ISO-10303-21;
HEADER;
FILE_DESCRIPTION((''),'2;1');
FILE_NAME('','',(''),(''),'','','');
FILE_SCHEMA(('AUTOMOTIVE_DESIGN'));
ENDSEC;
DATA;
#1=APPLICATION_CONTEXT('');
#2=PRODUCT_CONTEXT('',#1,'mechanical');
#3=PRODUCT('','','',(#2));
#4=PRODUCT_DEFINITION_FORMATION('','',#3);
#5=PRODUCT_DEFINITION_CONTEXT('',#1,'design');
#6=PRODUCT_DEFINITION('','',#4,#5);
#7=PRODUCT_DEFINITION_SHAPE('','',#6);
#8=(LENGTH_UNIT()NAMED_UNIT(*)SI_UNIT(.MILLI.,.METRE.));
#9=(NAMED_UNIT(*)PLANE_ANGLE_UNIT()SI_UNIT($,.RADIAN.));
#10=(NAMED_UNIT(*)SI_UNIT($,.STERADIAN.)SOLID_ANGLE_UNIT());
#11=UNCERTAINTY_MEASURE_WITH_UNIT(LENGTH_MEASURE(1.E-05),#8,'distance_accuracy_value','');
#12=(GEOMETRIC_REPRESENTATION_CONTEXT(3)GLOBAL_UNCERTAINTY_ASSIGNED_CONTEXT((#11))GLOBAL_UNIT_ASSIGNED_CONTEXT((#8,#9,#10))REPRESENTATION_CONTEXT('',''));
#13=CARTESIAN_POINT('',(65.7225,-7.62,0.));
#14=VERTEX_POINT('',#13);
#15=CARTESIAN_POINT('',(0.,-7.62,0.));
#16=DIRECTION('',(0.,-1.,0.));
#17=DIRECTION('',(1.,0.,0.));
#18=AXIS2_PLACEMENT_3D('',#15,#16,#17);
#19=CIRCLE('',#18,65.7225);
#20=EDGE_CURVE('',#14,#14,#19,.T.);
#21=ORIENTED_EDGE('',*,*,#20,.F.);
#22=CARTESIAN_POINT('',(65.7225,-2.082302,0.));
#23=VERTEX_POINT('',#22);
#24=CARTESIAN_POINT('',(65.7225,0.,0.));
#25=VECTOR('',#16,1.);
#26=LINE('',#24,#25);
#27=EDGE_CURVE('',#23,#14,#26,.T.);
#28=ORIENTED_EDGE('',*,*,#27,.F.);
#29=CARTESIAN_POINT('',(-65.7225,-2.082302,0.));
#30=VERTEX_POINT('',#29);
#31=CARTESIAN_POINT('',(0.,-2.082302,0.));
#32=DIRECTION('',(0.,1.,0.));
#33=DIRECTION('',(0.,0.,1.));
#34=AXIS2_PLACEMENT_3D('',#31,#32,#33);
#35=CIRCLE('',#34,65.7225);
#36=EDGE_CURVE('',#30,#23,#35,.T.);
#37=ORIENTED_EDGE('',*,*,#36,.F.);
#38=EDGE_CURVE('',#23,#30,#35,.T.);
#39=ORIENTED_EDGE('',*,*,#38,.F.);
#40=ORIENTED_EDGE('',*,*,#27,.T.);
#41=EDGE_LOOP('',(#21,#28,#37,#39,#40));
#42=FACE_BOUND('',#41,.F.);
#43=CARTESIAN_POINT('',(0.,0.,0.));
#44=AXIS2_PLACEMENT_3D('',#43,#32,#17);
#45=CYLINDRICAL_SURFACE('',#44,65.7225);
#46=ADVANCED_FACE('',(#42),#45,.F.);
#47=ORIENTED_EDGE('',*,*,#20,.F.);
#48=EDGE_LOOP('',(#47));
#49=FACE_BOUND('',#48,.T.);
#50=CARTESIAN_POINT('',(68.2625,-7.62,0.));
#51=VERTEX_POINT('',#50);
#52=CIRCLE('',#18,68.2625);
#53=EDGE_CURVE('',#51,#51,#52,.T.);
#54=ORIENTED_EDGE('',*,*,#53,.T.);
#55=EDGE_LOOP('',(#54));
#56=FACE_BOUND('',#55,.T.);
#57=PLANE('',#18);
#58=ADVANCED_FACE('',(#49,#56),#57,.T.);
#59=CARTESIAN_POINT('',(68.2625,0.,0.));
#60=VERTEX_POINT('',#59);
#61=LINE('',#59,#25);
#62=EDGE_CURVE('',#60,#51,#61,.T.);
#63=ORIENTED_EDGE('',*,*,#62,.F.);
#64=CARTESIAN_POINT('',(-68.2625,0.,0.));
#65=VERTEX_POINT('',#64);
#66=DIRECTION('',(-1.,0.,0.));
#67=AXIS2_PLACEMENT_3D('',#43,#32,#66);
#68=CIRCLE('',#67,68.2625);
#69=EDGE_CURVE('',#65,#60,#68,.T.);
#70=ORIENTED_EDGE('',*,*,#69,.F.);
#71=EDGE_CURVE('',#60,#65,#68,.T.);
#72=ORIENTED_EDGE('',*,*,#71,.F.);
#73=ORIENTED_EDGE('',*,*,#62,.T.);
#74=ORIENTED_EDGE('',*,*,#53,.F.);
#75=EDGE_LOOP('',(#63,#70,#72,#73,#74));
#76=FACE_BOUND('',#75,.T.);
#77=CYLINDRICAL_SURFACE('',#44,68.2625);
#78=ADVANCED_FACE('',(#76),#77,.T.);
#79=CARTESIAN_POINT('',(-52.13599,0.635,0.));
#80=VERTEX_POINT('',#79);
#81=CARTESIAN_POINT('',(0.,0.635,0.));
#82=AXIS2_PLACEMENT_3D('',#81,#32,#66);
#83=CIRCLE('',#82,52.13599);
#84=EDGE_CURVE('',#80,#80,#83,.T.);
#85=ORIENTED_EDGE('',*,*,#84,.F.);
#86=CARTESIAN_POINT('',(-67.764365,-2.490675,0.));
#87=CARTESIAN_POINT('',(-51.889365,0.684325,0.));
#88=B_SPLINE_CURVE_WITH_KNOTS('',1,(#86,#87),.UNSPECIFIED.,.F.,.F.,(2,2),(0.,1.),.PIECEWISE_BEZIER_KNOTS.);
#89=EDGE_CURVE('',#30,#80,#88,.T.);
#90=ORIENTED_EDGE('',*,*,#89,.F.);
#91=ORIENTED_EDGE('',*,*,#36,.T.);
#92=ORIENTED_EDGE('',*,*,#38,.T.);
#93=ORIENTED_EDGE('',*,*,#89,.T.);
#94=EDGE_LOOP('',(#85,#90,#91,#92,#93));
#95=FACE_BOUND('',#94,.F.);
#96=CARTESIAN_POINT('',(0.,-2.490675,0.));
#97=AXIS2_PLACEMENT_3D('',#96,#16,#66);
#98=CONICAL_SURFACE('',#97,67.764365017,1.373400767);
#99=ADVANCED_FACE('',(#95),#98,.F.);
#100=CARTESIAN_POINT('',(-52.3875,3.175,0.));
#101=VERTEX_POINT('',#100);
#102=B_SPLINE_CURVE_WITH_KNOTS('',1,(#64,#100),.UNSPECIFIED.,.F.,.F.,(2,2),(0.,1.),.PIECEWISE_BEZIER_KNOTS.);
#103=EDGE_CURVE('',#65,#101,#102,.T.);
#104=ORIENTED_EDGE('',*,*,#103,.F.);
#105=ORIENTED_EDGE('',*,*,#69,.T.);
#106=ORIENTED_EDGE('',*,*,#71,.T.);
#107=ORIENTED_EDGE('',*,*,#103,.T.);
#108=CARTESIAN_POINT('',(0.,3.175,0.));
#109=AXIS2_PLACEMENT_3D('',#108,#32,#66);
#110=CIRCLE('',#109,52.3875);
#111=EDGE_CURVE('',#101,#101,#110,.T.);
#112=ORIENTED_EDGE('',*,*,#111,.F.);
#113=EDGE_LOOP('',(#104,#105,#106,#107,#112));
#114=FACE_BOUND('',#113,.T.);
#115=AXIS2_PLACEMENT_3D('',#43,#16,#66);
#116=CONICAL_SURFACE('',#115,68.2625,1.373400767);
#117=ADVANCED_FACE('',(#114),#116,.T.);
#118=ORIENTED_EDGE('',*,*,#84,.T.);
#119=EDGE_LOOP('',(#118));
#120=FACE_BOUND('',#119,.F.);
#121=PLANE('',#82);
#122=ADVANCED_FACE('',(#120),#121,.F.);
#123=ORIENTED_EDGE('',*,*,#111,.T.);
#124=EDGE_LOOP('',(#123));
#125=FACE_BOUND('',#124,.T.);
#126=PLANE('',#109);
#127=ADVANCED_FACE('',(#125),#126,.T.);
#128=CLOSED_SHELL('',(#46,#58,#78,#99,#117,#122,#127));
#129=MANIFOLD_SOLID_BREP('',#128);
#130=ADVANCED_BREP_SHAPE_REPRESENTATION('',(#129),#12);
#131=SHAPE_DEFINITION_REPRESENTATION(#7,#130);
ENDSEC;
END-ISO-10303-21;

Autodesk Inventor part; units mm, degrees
ref_plane "YZ Plane" through (0, 0, 0) normal (1, 0, 0) x (0, 1, 0)
ref_plane "XY Plane" through (0, 0, 0) normal (0, 0, 1) x (1, 0, 0)
sketch "Sketch1" plane through (0, 0, 0) normal (0, 1, 0) x (-1, 0, 0)
  circle A0 centre (0, 0) radius 68.2625
  dimension "d0" = 136.525
ref_plane "Work Plane1" through (0, 3.175, 0) normal (0, 1, 0) x (-1, 0, 0)
sketch "Sketch2" plane through (0, 3.175, 0) normal (0, 1, 0) x (-1, 0, 0)
  circle A0 centre (0, 0) radius 52.3875
  dimension "d2" = 104.775
loft "Loft1" add profiles "Sketch1", "Sketch2"
sketch "Sketch3" plane through (0, 0, 0) normal (0, -1, 0) x (1, 0, 0)
  circle A0 centre (0, 0) radius 68.2625 projected
extrude "Extrusion1" add sketch "Sketch3" along normal blind 7.62
shell "Shell1" thickness 2.54 removed faces 1 at (13.9501, -7.62, -10.0034)
properties part number "speaker_cover"
